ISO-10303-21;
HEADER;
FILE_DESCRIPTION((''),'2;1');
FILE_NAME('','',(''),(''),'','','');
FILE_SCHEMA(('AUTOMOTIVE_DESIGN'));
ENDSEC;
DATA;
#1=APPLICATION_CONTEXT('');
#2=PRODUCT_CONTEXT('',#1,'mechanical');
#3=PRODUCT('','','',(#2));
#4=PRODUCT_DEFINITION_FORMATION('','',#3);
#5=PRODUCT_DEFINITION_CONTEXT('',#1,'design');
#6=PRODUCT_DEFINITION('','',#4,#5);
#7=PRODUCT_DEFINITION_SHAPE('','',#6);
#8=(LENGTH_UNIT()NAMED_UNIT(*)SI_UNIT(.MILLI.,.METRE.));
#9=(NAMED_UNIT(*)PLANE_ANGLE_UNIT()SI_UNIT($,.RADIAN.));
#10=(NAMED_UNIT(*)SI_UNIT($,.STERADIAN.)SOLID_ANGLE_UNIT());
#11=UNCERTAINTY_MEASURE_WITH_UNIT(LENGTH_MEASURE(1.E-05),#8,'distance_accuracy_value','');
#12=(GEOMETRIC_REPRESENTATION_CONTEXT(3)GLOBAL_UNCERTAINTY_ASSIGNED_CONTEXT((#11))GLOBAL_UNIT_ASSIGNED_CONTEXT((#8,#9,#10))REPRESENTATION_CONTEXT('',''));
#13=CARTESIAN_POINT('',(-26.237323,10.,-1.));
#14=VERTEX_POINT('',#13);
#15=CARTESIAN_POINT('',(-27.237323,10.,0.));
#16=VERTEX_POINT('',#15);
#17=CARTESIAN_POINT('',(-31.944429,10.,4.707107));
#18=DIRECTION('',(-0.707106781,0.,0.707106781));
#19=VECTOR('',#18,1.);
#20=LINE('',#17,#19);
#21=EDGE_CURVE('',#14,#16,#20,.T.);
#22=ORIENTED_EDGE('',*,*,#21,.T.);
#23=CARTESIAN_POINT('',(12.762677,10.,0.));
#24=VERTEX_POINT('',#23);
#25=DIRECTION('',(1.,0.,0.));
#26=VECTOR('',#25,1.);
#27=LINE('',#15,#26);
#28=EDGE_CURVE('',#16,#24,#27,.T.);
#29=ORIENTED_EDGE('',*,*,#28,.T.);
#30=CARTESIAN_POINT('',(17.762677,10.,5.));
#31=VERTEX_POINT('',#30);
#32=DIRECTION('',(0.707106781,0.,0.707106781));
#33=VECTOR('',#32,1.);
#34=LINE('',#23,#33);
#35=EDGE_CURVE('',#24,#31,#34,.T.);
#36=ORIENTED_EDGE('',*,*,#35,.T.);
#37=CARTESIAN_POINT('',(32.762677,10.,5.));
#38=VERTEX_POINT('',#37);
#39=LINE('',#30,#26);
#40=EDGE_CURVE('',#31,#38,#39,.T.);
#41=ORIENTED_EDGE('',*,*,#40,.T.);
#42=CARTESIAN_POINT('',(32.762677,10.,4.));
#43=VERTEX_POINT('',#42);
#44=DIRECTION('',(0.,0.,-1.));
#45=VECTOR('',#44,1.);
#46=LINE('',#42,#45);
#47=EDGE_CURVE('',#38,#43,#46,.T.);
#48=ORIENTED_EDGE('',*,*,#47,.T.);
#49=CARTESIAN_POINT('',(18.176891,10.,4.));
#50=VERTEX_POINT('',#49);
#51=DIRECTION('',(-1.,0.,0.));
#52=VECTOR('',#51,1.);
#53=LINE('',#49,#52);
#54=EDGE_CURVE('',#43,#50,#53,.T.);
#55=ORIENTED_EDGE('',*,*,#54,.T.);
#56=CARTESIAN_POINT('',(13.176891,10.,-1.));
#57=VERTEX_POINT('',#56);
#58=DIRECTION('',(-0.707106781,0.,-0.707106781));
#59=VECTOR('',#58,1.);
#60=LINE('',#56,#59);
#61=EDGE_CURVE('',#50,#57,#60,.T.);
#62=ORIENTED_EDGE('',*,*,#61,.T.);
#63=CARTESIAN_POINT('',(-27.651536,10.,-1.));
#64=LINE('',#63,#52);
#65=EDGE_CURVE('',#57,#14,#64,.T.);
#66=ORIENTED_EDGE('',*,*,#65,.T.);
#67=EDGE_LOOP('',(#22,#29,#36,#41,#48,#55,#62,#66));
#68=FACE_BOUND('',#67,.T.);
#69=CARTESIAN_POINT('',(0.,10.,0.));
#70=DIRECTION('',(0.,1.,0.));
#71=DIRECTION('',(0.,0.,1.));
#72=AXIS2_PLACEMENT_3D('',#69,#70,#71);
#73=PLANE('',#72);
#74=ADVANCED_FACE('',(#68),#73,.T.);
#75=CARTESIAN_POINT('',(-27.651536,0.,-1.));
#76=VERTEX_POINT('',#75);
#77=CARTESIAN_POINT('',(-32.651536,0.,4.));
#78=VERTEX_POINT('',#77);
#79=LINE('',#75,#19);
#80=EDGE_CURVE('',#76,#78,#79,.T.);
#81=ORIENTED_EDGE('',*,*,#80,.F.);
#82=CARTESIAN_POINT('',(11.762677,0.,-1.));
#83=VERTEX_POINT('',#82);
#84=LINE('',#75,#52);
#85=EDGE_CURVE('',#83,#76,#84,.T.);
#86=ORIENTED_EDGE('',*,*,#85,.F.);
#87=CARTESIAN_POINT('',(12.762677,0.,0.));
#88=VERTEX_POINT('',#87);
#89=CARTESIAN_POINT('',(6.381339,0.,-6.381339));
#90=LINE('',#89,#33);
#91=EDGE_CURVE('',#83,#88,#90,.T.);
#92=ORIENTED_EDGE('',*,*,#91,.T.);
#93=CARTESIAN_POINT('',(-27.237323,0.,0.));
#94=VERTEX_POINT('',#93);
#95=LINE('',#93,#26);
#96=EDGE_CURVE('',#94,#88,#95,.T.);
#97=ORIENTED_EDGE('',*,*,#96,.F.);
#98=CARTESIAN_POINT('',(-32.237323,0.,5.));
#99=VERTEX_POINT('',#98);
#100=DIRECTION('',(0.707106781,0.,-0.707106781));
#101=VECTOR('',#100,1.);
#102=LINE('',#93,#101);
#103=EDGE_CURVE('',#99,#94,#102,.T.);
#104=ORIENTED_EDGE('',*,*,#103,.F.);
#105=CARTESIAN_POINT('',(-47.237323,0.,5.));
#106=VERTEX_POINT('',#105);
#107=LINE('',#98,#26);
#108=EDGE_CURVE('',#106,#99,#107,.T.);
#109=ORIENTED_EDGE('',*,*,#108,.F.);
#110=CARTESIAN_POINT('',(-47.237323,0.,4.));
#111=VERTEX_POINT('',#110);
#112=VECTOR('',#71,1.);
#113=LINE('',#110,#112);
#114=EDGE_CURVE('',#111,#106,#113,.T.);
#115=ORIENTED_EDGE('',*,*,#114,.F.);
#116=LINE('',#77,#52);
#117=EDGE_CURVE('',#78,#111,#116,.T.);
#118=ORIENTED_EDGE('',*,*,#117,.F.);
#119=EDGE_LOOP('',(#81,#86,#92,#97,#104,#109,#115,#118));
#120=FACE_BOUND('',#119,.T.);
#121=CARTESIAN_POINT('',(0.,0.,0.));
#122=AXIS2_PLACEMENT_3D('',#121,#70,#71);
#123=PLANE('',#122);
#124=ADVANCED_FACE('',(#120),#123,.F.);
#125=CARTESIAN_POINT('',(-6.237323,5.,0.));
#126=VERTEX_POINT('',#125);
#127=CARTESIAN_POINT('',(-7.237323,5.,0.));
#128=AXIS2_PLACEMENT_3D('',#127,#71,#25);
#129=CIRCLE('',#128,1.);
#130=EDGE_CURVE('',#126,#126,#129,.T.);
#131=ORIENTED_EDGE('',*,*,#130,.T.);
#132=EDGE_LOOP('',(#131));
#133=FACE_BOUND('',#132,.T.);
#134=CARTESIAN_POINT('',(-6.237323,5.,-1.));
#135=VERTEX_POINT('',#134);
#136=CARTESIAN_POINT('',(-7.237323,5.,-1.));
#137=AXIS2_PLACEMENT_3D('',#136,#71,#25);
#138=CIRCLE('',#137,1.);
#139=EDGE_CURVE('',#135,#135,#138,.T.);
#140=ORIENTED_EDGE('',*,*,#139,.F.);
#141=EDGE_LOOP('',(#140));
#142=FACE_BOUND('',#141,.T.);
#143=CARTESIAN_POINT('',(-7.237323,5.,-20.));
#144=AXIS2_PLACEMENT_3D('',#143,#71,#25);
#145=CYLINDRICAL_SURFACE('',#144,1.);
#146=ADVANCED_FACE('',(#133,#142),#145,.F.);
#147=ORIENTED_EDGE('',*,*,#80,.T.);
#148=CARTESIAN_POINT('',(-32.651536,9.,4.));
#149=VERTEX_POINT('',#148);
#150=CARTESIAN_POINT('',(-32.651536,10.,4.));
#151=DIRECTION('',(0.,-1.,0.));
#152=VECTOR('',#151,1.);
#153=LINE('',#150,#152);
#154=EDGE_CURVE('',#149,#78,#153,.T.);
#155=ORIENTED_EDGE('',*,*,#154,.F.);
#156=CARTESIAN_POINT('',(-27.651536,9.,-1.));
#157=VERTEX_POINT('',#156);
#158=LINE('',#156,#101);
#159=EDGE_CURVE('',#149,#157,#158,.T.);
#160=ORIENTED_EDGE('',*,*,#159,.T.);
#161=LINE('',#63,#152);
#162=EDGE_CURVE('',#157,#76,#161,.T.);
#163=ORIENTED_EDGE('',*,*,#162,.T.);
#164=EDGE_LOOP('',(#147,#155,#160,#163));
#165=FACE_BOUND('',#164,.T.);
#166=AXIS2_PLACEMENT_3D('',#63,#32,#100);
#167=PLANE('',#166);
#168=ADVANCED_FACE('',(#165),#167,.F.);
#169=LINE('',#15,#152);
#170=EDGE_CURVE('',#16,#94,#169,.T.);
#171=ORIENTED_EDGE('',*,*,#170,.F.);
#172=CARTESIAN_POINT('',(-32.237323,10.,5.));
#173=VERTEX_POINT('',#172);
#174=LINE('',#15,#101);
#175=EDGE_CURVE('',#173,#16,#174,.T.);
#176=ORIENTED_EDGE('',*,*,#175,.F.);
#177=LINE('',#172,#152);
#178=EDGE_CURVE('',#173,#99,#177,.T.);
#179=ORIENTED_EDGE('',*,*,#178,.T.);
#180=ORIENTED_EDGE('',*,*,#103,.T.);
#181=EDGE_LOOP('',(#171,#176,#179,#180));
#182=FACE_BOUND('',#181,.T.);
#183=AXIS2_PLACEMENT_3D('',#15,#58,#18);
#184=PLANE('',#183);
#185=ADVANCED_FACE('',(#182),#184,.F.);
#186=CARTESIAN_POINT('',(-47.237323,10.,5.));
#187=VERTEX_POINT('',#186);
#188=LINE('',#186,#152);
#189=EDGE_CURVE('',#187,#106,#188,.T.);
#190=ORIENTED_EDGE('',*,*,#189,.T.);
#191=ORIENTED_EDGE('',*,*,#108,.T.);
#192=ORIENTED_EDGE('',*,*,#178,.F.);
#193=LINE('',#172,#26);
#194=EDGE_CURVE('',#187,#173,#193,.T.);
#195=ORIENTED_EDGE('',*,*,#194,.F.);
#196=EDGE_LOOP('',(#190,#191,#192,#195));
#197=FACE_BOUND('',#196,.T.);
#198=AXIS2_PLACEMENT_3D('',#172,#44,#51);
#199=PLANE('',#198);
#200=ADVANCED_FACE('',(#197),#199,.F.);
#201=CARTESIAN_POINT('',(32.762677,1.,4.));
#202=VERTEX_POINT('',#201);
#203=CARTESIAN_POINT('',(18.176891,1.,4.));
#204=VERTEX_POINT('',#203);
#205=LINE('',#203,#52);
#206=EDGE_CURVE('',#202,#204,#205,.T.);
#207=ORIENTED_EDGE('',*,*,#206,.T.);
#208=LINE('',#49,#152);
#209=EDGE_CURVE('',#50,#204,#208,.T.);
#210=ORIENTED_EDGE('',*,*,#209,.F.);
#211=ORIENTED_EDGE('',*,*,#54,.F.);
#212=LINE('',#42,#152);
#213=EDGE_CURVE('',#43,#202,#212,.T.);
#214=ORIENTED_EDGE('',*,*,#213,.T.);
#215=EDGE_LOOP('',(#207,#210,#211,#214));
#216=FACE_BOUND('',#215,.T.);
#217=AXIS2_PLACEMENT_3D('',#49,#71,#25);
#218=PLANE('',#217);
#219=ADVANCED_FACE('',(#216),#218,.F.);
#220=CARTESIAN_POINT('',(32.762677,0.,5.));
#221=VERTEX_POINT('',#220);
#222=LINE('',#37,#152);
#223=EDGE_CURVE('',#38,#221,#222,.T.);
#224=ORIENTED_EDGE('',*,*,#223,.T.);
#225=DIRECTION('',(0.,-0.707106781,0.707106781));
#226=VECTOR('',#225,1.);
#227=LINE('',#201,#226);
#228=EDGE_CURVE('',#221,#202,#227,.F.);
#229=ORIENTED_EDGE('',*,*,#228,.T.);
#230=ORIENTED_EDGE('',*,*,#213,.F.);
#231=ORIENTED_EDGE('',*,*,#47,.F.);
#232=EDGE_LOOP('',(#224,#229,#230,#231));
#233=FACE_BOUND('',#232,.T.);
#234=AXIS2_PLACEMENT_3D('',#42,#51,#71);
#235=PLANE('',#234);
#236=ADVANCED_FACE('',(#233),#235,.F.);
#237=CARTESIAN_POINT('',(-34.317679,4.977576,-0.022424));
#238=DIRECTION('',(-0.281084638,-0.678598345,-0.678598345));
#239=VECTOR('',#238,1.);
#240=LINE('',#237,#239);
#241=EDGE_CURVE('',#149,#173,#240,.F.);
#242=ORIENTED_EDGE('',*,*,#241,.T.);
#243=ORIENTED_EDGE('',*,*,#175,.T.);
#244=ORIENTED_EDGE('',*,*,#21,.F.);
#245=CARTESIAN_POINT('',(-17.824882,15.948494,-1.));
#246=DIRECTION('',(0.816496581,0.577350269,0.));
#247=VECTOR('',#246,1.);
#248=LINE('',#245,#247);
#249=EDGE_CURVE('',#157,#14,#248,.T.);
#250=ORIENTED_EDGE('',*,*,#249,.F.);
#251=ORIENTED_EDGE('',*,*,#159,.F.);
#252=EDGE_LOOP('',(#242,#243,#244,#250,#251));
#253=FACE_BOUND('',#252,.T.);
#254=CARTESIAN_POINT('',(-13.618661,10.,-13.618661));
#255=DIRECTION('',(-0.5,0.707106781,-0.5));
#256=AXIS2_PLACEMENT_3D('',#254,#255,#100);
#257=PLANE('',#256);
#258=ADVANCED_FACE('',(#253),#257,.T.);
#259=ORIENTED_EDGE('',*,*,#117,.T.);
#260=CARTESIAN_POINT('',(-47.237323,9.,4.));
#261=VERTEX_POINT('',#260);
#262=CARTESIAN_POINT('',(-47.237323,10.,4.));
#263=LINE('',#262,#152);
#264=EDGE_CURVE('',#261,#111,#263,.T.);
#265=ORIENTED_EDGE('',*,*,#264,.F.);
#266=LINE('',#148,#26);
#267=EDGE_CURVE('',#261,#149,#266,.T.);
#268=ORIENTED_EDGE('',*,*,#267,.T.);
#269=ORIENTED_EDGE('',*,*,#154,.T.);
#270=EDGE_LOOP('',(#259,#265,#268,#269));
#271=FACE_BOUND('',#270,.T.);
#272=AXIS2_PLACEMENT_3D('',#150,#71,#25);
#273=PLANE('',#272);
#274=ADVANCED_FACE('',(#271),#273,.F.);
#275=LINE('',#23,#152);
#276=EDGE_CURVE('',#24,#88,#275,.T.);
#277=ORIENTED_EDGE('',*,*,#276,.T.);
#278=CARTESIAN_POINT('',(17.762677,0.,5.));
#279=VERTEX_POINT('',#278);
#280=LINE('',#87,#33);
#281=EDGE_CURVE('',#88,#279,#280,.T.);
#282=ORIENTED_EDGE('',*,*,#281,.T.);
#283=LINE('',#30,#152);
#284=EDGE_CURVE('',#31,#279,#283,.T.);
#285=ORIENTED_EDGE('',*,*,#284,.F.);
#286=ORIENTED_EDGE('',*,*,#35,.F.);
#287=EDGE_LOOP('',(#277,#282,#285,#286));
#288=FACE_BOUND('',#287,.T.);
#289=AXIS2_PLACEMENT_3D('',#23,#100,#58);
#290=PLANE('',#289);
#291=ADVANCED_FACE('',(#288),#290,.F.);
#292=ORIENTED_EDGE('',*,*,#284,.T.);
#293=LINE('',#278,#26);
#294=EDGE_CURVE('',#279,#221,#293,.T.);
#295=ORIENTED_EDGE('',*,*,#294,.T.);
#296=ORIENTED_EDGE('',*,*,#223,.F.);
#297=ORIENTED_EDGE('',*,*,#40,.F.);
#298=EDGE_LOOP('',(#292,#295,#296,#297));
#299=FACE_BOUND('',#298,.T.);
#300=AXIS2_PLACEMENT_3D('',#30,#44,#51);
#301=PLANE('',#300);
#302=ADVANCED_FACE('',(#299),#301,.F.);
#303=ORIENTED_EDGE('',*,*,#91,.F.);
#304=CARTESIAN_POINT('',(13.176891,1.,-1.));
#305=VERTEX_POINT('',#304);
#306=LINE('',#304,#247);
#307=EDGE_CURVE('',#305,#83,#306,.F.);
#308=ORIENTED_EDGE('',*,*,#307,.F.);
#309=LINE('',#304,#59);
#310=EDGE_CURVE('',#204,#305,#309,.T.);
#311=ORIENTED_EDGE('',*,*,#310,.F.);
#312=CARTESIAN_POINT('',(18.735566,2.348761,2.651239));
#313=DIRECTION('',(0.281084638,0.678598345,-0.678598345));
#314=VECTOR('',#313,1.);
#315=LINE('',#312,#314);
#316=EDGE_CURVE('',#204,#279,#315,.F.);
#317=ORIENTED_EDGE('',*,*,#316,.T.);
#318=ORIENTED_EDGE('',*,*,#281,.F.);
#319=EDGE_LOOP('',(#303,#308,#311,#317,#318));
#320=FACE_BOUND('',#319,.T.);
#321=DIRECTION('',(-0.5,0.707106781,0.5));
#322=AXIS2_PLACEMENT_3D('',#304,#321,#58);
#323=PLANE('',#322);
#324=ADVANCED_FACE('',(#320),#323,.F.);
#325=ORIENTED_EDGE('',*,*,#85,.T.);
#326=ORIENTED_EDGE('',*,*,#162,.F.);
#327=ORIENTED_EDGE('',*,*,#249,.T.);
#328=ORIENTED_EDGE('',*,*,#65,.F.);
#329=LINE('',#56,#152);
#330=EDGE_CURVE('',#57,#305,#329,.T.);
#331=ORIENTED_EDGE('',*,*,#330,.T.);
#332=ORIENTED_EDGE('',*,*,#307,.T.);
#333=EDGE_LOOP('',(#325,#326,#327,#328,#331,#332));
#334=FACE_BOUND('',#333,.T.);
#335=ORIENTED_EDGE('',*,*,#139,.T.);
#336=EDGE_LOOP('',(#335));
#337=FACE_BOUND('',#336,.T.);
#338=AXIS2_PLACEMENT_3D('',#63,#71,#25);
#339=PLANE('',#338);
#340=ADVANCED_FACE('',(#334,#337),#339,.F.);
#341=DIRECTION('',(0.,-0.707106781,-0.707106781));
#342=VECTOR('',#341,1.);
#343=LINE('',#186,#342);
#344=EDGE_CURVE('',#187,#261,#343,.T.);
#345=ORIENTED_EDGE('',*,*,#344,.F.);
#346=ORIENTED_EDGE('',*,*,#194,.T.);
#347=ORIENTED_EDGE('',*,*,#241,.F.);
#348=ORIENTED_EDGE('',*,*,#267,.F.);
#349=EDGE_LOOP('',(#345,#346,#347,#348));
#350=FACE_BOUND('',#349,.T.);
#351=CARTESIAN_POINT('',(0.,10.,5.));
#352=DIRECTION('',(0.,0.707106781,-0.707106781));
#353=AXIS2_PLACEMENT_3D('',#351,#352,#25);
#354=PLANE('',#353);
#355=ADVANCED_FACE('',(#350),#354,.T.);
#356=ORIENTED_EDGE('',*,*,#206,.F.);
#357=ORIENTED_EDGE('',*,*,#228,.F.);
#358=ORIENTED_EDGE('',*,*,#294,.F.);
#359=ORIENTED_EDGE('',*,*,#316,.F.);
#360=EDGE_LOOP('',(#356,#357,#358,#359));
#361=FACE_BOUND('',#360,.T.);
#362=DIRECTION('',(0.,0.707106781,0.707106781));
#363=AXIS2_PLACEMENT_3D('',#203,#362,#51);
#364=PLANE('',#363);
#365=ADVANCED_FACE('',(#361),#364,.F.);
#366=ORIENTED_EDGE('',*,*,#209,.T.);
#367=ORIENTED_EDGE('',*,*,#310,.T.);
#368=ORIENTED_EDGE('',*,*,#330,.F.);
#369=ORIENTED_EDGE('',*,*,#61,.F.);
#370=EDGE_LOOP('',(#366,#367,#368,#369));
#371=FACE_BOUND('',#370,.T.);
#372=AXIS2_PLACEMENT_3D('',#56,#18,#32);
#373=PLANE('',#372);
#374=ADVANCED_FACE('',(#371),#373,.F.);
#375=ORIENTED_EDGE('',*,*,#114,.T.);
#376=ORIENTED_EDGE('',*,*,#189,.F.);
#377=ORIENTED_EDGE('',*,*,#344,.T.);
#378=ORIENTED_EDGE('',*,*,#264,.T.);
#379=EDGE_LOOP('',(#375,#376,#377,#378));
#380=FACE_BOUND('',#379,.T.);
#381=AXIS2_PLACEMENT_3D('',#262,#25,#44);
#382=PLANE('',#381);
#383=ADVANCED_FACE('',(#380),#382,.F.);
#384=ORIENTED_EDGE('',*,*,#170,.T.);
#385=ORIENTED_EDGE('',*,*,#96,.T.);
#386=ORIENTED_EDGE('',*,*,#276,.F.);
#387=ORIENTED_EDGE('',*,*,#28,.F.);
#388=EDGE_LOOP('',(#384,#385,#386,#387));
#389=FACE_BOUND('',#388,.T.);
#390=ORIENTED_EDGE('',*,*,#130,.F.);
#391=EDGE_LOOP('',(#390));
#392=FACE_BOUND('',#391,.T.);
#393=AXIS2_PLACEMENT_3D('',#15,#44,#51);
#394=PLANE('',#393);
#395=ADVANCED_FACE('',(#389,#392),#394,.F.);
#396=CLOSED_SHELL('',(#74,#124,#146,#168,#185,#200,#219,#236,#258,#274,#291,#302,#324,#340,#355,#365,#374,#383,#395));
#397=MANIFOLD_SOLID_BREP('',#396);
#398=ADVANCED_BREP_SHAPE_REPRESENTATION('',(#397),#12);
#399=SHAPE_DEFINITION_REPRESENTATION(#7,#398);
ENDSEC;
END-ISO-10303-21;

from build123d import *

# Parameters (mm, degrees)
BOTTOM_BLADE_EXTRUDE_DEPTH        = 10
BOTTOM_BLADE_CUT_1_SIZE           = 1
BOTTOM_BLADE_CUT_2_SIZE           = 1
SKETCH3_R                         = 1
HOLE_FOR_SCREW_BOTTOM_BLADE_DEPTH = 20


with BuildPart() as part:
    # Sketch2 → Bottom Blade Extrude (new body)
    with BuildSketch(Plane(origin=(0, 0, 0), x_dir=(1, 0, 0), z_dir=(0, 1, 0))):
        Polygon((-27.237322503, 0), (12.762677497, 0), (17.762677497, -5), (32.762677497, -5), (32.762677497, -4), (18.17689106, -4), (13.17689106, 1), (-27.651536065, 1), (-32.651536065, -4), (-47.237322503, -4), (-47.237322503, -5), (-32.237322503, -5), align=None)
    extrude(amount=BOTTOM_BLADE_EXTRUDE_DEPTH)

    # Bottom Blade Cut 1
    bottom_blade_cut_1_edges = [part.edges().sort_by_distance(p)[0] for p in [
        (-30.151536065, 10, 1.5),
        (-39.944429284, 10, 4),
    ]]
    chamfer(bottom_blade_cut_1_edges, length=BOTTOM_BLADE_CUT_1_SIZE - 0.0001)  # a hair under: the kernel refuses the full size

    # Bottom Blade Cut 2
    bottom_blade_cut_2_edges = [part.edges().sort_by_distance(p)[0] for p in [
        (15.67689106, 0, 1.5),
        (25.469784279, 0, 4),
    ]]
    chamfer(bottom_blade_cut_2_edges, length=BOTTOM_BLADE_CUT_2_SIZE - 0.0001)  # a hair under: the kernel refuses the full size

    # Sketch3 → Hole for Screw ( Bottom Blade) (cut)
    with BuildSketch(Plane.XY):
        with Locations((-7.237322503, 5)):
            Circle(SKETCH3_R)
    extrude(amount=-HOLE_FOR_SCREW_BOTTOM_BLADE_DEPTH, mode=Mode.SUBTRACT)


solid = part.part
